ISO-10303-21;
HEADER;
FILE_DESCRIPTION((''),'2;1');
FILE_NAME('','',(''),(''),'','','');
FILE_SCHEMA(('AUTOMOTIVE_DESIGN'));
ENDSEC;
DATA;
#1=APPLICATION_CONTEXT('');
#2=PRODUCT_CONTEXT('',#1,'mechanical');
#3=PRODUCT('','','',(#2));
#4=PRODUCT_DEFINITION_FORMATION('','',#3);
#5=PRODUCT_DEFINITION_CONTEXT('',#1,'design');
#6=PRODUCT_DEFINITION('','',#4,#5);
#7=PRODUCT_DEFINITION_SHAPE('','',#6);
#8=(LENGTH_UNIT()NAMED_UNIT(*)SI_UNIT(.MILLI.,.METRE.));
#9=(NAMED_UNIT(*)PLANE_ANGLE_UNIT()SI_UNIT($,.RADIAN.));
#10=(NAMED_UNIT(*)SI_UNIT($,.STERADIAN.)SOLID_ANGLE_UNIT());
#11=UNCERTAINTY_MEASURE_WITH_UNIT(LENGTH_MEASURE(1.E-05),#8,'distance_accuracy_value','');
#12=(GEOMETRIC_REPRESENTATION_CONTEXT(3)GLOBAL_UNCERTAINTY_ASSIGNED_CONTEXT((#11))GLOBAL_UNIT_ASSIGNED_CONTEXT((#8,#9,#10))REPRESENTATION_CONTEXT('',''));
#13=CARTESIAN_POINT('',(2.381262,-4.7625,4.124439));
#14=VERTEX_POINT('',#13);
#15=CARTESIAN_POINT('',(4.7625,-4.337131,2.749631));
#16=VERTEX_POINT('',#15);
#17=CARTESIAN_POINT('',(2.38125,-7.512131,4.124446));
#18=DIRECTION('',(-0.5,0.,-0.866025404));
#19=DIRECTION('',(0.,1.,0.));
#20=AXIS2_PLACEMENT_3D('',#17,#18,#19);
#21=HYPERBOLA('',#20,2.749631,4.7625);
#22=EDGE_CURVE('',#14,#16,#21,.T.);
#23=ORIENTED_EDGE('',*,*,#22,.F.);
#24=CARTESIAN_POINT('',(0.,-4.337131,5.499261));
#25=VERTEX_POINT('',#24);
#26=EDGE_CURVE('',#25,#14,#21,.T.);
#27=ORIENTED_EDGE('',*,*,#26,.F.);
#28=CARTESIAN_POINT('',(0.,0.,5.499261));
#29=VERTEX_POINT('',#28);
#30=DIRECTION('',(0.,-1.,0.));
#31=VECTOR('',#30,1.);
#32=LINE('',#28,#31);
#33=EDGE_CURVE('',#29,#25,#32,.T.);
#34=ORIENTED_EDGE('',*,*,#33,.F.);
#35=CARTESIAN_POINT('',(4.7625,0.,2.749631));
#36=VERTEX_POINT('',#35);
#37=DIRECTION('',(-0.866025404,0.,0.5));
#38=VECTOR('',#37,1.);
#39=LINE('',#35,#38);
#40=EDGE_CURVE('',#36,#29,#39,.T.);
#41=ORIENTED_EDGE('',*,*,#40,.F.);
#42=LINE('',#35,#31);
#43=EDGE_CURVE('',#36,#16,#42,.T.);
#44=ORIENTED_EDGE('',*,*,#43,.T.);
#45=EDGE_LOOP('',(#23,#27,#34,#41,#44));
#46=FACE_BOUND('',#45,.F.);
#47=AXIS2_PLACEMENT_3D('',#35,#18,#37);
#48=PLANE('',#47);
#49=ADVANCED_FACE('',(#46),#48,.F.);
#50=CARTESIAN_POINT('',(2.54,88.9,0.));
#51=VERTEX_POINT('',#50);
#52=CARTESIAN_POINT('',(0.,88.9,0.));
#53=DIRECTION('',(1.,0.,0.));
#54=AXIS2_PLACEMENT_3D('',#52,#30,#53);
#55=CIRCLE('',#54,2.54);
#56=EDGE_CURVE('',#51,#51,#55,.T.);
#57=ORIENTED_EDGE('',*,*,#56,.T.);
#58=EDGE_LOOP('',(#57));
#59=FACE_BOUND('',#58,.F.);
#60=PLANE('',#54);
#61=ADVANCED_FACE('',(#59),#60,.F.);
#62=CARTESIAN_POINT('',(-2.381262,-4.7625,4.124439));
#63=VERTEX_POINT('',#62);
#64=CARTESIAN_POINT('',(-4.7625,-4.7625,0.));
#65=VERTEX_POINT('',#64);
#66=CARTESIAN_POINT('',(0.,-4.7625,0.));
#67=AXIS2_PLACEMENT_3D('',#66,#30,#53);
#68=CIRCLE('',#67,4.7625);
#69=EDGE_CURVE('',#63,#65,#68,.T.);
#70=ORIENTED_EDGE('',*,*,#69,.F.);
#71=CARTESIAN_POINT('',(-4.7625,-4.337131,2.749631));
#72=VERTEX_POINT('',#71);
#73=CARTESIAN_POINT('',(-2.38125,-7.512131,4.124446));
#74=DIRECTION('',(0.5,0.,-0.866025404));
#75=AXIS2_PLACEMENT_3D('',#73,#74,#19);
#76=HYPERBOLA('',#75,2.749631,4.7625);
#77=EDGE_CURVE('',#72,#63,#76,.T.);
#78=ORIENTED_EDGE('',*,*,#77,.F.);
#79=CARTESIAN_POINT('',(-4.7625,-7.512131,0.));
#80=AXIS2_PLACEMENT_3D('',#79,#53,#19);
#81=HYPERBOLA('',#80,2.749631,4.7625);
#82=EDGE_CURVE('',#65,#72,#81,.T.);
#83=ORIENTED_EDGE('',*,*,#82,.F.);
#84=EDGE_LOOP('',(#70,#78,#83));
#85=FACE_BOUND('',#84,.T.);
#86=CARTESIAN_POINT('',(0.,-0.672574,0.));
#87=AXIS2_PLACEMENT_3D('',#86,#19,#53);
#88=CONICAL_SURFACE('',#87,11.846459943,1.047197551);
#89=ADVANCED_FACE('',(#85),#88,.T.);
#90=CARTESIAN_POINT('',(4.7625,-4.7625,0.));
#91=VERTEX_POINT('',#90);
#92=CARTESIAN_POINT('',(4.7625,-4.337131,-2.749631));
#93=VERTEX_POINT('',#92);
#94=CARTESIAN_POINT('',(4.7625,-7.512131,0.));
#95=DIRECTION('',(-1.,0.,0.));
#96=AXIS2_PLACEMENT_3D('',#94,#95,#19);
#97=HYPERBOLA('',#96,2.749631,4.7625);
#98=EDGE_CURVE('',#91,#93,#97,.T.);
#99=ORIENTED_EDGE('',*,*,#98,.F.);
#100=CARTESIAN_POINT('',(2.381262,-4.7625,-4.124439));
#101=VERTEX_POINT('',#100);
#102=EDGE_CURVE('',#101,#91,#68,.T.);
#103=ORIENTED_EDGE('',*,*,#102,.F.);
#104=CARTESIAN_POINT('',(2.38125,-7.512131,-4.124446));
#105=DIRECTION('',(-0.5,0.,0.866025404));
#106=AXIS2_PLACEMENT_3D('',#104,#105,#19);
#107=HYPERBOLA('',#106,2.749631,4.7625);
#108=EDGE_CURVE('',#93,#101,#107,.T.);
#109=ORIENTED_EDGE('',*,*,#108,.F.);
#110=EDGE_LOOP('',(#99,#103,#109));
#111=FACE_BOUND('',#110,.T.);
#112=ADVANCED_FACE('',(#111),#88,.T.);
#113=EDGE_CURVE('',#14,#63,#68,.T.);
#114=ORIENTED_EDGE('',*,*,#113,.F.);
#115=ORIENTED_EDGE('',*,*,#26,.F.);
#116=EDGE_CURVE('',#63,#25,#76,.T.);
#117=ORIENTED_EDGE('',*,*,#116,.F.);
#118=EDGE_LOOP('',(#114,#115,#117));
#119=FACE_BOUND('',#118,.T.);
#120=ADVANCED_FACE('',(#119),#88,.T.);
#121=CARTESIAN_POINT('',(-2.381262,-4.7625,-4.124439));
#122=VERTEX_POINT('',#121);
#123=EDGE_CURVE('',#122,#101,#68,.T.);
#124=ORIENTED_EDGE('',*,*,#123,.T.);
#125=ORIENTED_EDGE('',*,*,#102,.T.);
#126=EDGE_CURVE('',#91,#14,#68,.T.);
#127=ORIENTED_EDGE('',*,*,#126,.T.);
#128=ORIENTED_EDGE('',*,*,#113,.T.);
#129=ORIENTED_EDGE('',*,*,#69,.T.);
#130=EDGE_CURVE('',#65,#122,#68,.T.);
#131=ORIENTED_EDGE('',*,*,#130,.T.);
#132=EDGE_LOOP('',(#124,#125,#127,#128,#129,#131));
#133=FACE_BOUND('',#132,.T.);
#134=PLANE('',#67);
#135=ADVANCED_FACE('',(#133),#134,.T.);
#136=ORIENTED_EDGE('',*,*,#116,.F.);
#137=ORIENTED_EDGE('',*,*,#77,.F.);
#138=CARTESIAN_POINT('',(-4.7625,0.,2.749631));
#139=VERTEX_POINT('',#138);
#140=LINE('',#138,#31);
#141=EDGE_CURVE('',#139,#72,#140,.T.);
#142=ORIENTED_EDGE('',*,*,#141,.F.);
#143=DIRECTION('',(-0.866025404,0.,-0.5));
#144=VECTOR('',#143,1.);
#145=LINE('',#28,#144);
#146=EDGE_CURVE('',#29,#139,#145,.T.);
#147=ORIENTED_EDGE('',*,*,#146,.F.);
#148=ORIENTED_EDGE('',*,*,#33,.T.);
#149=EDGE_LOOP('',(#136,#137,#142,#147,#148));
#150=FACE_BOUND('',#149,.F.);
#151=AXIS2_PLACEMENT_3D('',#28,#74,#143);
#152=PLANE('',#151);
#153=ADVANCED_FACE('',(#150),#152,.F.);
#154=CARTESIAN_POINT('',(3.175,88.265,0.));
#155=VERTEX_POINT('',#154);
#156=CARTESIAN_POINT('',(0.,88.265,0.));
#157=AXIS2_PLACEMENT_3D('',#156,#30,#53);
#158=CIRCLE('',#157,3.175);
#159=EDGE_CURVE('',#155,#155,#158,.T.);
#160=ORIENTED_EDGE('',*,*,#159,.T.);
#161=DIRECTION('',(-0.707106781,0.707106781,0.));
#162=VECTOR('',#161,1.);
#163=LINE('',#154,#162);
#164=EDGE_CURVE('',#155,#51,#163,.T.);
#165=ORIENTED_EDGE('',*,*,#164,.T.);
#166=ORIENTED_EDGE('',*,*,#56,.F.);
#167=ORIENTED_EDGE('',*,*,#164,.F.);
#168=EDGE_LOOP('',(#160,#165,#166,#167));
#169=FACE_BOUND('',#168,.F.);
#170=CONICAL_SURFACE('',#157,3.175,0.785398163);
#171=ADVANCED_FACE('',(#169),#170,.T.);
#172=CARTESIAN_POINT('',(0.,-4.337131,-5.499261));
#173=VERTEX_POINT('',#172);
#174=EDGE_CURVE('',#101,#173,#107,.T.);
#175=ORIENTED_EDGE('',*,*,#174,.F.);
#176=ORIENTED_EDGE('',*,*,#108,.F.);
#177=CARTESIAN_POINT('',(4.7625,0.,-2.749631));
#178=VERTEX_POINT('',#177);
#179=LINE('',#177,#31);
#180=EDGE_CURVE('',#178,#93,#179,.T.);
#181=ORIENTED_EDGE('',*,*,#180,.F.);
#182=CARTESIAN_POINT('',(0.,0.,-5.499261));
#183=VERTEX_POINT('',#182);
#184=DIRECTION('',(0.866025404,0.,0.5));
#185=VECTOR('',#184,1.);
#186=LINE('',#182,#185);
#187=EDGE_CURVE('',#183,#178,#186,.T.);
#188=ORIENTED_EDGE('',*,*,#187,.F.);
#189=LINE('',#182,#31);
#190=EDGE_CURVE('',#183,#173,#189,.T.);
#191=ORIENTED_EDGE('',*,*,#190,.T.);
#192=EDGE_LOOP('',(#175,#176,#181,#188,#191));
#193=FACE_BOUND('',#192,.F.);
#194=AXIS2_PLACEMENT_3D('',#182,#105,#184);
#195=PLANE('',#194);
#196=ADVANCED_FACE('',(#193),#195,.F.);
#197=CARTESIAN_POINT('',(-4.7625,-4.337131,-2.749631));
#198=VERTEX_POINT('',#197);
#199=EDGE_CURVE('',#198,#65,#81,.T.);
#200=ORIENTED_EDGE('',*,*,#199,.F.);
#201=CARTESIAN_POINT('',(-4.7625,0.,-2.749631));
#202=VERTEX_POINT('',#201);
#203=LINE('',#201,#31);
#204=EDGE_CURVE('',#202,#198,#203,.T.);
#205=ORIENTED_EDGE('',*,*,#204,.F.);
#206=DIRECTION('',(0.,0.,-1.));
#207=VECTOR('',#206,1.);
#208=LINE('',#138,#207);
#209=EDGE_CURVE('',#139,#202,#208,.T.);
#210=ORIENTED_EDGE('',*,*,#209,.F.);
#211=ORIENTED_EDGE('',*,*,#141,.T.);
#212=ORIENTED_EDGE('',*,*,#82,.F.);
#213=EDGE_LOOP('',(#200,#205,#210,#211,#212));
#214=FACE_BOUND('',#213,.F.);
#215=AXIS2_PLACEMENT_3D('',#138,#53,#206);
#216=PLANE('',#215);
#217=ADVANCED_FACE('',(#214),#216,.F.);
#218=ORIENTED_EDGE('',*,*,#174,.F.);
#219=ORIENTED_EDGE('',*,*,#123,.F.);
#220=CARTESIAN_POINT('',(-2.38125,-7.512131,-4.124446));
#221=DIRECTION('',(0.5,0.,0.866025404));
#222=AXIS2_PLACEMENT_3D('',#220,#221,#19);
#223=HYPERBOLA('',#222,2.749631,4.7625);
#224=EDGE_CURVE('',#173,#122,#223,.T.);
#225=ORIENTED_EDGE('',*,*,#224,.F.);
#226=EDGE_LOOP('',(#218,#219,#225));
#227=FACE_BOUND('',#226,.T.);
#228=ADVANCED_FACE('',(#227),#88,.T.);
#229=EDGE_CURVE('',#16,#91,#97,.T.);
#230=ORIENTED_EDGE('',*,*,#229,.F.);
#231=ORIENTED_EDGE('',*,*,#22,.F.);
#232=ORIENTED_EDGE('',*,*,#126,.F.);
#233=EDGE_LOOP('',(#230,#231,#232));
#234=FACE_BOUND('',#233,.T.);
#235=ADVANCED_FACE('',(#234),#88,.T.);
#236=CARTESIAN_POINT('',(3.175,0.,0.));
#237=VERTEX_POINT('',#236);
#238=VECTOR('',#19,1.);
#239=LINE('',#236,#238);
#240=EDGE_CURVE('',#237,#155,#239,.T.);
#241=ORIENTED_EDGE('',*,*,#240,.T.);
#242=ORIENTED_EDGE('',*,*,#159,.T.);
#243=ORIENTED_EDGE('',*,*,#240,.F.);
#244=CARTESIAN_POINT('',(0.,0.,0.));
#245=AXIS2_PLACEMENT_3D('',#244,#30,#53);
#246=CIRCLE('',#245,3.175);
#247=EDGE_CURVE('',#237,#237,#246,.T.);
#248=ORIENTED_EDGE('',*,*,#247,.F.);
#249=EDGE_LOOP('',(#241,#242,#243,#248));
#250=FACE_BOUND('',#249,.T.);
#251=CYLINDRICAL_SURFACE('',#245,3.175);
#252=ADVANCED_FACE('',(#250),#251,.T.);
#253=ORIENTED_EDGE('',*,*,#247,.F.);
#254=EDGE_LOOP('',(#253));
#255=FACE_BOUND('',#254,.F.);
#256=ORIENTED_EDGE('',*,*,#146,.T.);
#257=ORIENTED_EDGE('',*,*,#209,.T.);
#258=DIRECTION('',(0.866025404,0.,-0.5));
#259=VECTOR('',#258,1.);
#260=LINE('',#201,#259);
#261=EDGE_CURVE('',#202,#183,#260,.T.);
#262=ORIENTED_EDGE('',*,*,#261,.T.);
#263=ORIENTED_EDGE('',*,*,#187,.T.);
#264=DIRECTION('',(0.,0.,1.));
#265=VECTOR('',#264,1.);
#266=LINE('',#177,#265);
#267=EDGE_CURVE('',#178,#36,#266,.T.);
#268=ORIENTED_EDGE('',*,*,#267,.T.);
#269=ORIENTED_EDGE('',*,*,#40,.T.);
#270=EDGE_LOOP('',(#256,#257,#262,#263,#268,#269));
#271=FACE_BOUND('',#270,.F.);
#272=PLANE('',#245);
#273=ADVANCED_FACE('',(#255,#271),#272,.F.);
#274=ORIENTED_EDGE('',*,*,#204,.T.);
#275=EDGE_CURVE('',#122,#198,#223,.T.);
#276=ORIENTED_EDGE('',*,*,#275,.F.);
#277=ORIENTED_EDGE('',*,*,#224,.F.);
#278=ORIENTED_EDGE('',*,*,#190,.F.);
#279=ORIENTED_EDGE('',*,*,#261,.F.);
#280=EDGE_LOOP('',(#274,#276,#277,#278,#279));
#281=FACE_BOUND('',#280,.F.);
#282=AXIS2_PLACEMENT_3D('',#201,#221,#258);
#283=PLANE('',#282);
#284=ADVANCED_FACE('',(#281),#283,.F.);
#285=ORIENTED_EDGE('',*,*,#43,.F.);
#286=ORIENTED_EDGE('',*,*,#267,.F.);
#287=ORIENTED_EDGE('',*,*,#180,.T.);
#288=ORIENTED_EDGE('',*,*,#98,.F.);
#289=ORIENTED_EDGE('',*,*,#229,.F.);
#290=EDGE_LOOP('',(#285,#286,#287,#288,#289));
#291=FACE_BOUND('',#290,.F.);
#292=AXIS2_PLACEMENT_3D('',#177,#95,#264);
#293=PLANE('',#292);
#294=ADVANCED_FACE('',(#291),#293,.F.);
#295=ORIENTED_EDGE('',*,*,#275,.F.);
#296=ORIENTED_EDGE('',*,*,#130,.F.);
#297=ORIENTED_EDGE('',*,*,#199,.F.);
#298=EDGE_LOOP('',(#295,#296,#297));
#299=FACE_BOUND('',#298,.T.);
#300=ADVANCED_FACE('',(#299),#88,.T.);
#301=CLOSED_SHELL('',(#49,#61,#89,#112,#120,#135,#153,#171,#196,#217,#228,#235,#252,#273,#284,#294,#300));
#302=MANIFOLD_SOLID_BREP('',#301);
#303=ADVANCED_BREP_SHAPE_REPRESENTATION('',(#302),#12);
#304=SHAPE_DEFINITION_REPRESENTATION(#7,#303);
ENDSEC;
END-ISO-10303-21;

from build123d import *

# Parameters (mm, degrees)
F2_R     = 3.175
F3_DEPTH = 88.9
F5_DEPTH = 4.7625
F6_SIZE  = 0.635


# Not quite as in the source:
# - a length typed as a fraction of an inch, garbled in the dataset ("3 / 203.2 mm" for 3/8 in), is restored


with BuildPart() as f3:
    # F2 (on Front) → F3 (new body)
    with BuildSketch(Plane.XZ):
        Circle(F2_R)
    extrude(amount=-F3_DEPTH)

    # F4 (on Front) → F5 (join)
    with BuildSketch(Plane.XZ):
        Polygon((0, -5.499261314), (4.7625, -2.749630657), (4.7625, 2.749630657), (0, 5.499261314), (-4.7625, 2.749630657), (-4.7625, -2.749630657), align=None)
    extrude(amount=F5_DEPTH)

    # F6
    f6_edges = [f3.edges().sort_by_distance(p)[0] for p in [
        (-3.175, 88.9, 0),
    ]]
    chamfer(f6_edges, length=F6_SIZE)

    # F7 (on Top) → F8 (revolve, cut)
    with BuildSketch(Plane.XY):
        Polygon((11.8464599431, -4.7625), (11.8464599431, -0.6725738199), (4.7625, -4.7625), align=None)
    revolve(axis=Axis((0, -2.38125, 0), (0, -1, 0)), mode=Mode.SUBTRACT)


solid = f3.part
